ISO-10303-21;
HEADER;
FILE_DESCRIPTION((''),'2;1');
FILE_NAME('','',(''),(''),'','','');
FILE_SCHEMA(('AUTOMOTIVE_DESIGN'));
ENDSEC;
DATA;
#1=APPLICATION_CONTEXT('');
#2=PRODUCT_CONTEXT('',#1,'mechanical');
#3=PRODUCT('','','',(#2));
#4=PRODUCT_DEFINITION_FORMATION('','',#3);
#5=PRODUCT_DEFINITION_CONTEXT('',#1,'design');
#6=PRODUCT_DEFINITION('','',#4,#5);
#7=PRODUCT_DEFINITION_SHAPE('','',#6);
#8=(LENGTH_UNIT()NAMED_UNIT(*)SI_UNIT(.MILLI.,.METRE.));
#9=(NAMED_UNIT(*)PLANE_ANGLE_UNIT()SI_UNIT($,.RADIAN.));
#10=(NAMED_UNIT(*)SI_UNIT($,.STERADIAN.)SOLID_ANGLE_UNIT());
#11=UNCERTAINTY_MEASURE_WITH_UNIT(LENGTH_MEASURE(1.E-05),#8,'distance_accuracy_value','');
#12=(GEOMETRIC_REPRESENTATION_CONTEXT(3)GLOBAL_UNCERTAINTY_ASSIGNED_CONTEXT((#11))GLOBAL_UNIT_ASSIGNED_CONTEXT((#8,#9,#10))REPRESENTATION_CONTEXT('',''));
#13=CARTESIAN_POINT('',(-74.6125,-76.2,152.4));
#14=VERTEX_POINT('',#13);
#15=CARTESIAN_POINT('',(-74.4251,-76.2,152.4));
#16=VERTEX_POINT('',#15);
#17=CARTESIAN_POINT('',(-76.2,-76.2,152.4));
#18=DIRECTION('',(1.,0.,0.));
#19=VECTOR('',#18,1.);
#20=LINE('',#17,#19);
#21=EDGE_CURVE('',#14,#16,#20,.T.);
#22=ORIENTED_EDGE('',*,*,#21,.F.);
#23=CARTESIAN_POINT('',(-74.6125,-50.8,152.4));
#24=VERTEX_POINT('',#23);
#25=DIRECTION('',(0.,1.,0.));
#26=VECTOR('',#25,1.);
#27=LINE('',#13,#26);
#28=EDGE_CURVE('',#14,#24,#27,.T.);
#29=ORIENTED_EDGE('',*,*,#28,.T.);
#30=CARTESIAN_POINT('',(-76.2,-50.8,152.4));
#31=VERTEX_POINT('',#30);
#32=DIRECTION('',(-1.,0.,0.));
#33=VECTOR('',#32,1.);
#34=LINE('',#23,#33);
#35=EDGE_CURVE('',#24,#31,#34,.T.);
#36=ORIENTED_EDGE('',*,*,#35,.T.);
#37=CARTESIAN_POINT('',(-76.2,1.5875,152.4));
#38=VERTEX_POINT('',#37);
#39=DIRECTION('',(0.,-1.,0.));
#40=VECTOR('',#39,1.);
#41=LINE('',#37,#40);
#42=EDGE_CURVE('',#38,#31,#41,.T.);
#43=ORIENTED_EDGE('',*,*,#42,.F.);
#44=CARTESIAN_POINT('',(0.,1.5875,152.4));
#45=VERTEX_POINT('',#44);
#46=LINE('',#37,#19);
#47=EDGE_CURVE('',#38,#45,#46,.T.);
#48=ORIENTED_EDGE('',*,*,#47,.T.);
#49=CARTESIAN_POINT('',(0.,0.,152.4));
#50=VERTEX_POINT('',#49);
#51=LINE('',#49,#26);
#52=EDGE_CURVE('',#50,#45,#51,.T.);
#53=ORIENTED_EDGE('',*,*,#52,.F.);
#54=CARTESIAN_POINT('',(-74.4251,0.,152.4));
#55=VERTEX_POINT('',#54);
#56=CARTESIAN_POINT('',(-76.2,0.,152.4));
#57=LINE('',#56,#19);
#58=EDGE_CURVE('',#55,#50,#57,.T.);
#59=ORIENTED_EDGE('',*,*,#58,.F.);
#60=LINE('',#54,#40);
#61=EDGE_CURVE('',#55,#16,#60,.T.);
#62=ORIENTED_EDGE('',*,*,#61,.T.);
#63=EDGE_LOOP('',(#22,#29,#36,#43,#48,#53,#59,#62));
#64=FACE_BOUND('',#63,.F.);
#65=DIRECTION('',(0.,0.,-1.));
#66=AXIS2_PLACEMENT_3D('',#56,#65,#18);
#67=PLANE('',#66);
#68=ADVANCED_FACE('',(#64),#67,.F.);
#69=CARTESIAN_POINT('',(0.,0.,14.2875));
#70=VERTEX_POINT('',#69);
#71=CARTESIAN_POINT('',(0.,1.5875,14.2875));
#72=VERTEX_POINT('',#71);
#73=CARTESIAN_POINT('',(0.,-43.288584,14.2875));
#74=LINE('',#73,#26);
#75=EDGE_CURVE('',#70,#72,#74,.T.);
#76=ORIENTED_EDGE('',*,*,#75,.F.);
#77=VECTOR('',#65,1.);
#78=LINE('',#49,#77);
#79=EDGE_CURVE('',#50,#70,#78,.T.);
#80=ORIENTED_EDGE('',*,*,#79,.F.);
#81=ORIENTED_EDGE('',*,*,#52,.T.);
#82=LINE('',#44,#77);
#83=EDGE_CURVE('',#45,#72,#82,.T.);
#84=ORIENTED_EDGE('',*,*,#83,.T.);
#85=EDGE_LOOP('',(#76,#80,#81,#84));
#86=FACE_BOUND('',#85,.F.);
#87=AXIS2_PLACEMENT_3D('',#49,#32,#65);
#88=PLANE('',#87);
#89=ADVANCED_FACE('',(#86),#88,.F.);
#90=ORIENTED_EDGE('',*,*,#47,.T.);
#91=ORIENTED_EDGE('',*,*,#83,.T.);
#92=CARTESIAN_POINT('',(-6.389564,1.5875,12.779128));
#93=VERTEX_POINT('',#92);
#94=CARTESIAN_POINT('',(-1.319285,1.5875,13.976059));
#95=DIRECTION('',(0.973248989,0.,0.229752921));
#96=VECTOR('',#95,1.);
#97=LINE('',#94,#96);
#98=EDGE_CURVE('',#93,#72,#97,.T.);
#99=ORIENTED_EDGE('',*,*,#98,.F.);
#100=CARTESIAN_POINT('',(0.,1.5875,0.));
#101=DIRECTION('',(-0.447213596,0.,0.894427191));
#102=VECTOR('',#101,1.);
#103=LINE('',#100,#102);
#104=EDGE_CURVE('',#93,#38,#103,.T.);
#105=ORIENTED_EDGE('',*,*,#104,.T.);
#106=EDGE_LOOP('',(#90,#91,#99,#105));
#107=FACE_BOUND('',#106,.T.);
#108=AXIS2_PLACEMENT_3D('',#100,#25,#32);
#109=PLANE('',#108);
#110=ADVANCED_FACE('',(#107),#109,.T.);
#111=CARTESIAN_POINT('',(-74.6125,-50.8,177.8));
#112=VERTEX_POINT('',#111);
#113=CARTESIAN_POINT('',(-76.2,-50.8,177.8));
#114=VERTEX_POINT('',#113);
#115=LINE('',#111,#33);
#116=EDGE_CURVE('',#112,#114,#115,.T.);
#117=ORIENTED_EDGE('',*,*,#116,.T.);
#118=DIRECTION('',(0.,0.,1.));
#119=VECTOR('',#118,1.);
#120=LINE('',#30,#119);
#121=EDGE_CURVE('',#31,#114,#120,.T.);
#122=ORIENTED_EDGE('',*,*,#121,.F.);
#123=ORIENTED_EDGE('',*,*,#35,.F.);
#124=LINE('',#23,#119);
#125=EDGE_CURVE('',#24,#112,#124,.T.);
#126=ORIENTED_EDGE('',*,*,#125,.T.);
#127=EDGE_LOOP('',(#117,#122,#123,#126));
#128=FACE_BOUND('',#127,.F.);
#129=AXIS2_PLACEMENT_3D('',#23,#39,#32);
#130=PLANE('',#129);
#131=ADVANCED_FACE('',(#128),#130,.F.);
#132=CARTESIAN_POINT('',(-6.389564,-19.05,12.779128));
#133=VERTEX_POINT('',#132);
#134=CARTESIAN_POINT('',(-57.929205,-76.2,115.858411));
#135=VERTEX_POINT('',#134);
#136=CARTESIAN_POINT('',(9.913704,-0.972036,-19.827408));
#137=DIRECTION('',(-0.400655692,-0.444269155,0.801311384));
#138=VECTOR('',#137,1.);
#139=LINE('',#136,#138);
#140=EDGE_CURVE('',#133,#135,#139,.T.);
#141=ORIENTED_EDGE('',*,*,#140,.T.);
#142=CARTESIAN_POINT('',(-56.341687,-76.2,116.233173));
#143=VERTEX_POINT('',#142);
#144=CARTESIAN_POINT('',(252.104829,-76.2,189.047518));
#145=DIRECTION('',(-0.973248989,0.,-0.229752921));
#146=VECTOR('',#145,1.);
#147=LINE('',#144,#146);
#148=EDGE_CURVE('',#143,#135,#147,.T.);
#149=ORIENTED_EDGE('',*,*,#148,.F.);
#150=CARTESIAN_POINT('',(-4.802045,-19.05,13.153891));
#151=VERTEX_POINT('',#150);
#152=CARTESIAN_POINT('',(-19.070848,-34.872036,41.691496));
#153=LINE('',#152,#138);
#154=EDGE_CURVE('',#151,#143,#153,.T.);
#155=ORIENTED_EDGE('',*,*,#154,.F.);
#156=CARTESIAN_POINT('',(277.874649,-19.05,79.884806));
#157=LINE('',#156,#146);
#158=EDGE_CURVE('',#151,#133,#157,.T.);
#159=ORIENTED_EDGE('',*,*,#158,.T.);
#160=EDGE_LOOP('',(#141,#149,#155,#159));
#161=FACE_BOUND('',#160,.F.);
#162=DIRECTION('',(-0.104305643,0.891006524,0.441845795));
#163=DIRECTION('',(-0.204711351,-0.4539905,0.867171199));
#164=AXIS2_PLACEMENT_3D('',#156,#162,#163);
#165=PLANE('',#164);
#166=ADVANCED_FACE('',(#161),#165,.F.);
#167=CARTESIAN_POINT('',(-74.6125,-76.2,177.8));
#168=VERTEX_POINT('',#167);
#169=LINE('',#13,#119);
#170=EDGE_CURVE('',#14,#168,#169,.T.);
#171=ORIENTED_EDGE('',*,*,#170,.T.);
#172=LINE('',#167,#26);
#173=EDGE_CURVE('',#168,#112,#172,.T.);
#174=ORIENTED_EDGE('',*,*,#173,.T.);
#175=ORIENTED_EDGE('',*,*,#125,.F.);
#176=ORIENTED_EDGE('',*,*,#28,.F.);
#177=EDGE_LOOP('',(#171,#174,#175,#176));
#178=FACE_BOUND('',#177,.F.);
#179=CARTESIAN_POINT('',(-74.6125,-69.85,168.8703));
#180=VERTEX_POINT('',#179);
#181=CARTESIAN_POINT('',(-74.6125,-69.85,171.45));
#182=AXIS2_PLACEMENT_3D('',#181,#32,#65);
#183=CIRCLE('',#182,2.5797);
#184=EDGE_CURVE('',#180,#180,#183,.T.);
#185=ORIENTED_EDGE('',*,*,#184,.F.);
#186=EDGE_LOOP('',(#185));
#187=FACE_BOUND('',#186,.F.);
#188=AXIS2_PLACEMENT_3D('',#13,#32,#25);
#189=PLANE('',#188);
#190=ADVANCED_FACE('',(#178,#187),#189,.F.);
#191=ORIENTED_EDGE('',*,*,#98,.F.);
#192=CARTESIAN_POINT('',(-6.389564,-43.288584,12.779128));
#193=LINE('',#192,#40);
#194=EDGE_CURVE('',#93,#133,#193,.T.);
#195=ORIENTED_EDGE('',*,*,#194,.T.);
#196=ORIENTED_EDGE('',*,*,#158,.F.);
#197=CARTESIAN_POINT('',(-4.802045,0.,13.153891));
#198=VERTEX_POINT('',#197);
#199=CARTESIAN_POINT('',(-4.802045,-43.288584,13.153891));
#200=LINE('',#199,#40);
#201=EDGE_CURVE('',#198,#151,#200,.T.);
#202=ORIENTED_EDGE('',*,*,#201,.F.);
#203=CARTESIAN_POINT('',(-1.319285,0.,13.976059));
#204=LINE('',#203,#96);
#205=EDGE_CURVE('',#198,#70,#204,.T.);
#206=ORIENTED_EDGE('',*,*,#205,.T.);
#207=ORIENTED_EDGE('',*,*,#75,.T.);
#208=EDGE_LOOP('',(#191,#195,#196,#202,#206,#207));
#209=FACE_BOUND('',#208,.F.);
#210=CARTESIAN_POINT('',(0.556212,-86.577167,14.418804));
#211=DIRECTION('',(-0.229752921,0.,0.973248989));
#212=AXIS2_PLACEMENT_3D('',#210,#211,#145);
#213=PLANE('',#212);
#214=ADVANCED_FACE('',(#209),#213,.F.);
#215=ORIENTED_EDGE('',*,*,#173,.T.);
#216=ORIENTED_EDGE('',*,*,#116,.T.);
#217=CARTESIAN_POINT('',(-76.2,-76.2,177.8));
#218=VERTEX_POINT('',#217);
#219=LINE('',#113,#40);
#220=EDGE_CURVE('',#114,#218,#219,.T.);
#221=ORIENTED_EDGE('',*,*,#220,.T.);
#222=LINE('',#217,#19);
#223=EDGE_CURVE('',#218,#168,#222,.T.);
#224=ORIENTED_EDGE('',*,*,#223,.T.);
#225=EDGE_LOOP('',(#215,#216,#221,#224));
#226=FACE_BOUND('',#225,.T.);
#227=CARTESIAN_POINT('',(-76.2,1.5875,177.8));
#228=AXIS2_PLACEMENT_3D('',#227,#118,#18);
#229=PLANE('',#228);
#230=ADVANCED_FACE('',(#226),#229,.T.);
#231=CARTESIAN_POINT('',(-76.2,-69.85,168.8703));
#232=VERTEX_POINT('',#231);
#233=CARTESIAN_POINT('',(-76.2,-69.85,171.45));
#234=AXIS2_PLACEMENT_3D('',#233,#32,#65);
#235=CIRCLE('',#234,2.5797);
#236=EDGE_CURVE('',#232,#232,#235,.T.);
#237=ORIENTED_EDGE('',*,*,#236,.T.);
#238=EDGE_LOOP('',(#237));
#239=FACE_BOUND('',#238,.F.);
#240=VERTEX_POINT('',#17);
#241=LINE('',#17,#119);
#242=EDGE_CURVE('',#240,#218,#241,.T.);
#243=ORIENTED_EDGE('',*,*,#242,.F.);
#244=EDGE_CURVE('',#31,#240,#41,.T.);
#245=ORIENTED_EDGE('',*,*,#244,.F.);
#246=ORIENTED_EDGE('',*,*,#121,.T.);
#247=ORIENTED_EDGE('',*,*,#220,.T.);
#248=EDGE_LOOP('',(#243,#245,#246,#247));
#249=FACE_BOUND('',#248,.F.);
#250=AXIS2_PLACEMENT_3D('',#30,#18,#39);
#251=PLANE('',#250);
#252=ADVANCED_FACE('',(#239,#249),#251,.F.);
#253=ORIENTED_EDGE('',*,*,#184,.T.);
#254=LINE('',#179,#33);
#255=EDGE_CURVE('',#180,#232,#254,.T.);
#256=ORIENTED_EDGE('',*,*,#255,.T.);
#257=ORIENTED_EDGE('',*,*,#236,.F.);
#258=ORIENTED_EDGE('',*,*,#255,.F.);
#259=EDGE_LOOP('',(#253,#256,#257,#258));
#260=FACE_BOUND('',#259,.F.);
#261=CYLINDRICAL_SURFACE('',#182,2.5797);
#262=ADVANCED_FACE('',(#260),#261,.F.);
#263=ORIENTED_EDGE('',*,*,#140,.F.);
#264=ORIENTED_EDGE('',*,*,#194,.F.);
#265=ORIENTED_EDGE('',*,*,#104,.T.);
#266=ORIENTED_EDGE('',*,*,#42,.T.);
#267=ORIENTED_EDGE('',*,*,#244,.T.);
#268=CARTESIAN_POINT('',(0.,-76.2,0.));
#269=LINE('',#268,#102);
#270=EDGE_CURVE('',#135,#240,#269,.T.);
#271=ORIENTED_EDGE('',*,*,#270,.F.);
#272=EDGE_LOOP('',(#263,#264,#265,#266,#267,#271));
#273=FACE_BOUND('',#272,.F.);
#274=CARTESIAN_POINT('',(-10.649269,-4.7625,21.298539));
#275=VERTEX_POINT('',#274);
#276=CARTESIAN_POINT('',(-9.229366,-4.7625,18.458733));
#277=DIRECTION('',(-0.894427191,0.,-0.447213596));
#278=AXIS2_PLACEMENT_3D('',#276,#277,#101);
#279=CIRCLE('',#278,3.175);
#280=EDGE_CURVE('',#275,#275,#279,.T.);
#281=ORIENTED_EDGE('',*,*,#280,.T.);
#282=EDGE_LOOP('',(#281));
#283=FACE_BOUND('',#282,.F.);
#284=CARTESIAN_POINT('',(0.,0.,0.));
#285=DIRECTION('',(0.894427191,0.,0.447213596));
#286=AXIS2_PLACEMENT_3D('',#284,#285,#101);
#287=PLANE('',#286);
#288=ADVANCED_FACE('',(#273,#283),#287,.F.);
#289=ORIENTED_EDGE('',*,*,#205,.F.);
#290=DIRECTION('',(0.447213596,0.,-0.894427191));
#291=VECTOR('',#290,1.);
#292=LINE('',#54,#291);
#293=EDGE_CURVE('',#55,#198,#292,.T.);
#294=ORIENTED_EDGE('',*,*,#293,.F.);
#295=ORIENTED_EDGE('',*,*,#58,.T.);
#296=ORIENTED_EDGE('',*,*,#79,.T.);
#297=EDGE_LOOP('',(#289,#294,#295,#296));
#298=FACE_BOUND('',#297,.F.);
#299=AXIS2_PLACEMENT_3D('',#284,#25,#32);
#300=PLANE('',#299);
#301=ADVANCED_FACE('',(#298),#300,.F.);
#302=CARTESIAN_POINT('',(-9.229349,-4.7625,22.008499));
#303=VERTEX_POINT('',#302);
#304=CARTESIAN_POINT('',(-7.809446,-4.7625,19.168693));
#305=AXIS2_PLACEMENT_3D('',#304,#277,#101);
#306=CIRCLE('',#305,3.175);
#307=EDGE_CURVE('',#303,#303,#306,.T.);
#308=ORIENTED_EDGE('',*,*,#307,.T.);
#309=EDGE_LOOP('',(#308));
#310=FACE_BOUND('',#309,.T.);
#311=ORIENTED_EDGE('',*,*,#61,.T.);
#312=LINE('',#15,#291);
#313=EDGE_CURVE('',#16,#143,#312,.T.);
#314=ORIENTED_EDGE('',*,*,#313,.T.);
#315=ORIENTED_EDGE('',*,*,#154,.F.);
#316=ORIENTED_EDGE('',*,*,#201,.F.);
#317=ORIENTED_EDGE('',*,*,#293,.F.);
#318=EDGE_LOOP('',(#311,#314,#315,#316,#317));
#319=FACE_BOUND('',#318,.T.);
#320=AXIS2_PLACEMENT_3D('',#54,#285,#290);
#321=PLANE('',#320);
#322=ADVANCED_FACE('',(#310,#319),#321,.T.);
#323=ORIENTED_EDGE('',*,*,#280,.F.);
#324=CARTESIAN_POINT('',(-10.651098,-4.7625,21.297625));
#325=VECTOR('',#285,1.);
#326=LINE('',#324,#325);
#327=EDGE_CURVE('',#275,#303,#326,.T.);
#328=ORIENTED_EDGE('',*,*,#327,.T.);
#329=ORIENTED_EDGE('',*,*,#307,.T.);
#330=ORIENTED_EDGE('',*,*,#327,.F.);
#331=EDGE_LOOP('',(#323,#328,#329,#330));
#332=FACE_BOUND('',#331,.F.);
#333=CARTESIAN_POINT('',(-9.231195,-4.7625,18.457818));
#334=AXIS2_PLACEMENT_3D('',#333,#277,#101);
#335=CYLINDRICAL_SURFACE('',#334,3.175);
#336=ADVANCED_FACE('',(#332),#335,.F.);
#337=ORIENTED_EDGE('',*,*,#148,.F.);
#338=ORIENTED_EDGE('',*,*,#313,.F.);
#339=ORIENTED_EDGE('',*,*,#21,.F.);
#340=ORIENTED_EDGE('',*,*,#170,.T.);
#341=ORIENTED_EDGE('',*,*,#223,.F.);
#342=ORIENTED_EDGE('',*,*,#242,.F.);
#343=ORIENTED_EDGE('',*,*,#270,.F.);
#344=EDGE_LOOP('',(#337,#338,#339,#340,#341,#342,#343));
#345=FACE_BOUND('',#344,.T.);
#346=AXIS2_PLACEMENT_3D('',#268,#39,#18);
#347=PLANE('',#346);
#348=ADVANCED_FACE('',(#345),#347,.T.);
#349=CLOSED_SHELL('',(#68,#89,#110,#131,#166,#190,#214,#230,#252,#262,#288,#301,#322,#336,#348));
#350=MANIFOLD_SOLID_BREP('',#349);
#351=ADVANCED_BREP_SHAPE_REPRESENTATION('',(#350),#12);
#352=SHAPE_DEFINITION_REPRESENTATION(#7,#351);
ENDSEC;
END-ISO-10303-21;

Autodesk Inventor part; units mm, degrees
ref_plane "YZ Plane" through (0, 0, 0) normal (1, 0, 0) x (0, 1, 0)
ref_plane "XZ Plane" through (0, 0, 0) normal (0, 1, 0) x (-1, 0, 0)
ref_plane "XY Plane" through (0, 0, 0) normal (0, 0, 1) x (1, 0, 0)
sketch "Sketch1" plane through (0, 0, 0) normal (0, 1, 0) x (-1, 0, 0)
  line L0 (0, 0) -> (76.2, 152.4)
  line L1 (76.2, 152.4) -> (0, 152.4)
  line L2 (0, 152.4) -> (0, 0)
  dimension "d0" = 76.2
  dimension "d1" = 152.4
extrude "Extrusion1" add sketch "Sketch1" along normal blind 1.5875
sketch "Sketch2" plane through (0, 0, 0) normal (0, -1, 0) x (1, 0, 0)
  line L0 (-76.2, 152.4) -> (0, 152.4) projected
  line L1 (-74.4251, 152.4) -> (-3.175, 9.8998)
  line L2 (-3.175, 9.8998) -> (-4.5949, 9.1898)
  line L3 (0, 0) -> (-76.2, 152.4) projected
  line L4 (0, 0) -> (-76.2, 152.4) projected
  line L5 (0, 152.4) -> (0, 0) projected
  dimension "d4" = 1.5875
  dimension "d5" = 3.175
extrude "Extrusion2" add sketch "Sketch2" along normal blind 76.2 contours L0 L1 L2 L3
chamfer "Chamfer1" distance 14.2875 angle 45 1 edges at (0, 0.7937, 0)
chamfer "Chamfer2" distance 57.15 angle 63 1 edges at (-5.5958, -76.2, 12.9665)
sketch "Sketch4" plane through (-76.2, 1.5875, 152.4) normal (0, 0, 1) x (1, 0, 0)
  line L0 (0, 0) -> (1.5875, 0)
  line L1 (0, -77.7875) -> (18.2708, -77.7875) projected
  line L2 (0, -77.7875) -> (1.5875, -77.7875)
  line L3 (1.5875, -77.7875) -> (1.5875, -52.3875)
  line L4 (1.5875, -52.3875) -> (0, -52.3875)
  line L5 (0, -52.3875) -> (0, -77.7875)
  point P0 (76.2, -1.5875)
  dimension "d22" = 1.5875
  dimension "d23" = 25.4
extrude "Extrusion4" add sketch "Sketch4" along normal blind 25.4
sketch "Sketch5" plane through (-74.6125, -76.2, 152.4) normal (1, 0, 0) x (0, 0, -1)
  line L0 (0, 0) -> (-25.4, 0) projected
  line L1 (-25.4, 25.4) -> (-25.4, 0) projected
  point P0 (152.4, 76.2)
  point P1 (-19.05, 6.35)
  dimension "d24" = 6.35
  dimension "d25" = 6.35
hole "Hole1" at (-74.6125, -69.85, 171.45) direction (-1, 0, 0) diameter 5.1594 end through all
sketch "Sketch6" plane through (-6.3896, -19.05, 12.7791) normal (-0.8944272, 0, -0.4472136) x (-0.4472136, 0, 0.8944272)
  circle A0 centre (6.35, 14.2875) radius 3.175
  line L0 (0, 20.6375) -> (156.1009, 20.6375) projected
  line L1 (0, 0) -> (0, 20.6375) projected
  point P0 (-14.2875, 19.05)
  dimension "d33" = 6.35
  dimension "d34" = 6.35
  dimension "d35" = 6.35
extrude "Extrusion5" cut sketch "Sketch6" against normal blind 25.4
properties part number "15102898-16-P-0312"
